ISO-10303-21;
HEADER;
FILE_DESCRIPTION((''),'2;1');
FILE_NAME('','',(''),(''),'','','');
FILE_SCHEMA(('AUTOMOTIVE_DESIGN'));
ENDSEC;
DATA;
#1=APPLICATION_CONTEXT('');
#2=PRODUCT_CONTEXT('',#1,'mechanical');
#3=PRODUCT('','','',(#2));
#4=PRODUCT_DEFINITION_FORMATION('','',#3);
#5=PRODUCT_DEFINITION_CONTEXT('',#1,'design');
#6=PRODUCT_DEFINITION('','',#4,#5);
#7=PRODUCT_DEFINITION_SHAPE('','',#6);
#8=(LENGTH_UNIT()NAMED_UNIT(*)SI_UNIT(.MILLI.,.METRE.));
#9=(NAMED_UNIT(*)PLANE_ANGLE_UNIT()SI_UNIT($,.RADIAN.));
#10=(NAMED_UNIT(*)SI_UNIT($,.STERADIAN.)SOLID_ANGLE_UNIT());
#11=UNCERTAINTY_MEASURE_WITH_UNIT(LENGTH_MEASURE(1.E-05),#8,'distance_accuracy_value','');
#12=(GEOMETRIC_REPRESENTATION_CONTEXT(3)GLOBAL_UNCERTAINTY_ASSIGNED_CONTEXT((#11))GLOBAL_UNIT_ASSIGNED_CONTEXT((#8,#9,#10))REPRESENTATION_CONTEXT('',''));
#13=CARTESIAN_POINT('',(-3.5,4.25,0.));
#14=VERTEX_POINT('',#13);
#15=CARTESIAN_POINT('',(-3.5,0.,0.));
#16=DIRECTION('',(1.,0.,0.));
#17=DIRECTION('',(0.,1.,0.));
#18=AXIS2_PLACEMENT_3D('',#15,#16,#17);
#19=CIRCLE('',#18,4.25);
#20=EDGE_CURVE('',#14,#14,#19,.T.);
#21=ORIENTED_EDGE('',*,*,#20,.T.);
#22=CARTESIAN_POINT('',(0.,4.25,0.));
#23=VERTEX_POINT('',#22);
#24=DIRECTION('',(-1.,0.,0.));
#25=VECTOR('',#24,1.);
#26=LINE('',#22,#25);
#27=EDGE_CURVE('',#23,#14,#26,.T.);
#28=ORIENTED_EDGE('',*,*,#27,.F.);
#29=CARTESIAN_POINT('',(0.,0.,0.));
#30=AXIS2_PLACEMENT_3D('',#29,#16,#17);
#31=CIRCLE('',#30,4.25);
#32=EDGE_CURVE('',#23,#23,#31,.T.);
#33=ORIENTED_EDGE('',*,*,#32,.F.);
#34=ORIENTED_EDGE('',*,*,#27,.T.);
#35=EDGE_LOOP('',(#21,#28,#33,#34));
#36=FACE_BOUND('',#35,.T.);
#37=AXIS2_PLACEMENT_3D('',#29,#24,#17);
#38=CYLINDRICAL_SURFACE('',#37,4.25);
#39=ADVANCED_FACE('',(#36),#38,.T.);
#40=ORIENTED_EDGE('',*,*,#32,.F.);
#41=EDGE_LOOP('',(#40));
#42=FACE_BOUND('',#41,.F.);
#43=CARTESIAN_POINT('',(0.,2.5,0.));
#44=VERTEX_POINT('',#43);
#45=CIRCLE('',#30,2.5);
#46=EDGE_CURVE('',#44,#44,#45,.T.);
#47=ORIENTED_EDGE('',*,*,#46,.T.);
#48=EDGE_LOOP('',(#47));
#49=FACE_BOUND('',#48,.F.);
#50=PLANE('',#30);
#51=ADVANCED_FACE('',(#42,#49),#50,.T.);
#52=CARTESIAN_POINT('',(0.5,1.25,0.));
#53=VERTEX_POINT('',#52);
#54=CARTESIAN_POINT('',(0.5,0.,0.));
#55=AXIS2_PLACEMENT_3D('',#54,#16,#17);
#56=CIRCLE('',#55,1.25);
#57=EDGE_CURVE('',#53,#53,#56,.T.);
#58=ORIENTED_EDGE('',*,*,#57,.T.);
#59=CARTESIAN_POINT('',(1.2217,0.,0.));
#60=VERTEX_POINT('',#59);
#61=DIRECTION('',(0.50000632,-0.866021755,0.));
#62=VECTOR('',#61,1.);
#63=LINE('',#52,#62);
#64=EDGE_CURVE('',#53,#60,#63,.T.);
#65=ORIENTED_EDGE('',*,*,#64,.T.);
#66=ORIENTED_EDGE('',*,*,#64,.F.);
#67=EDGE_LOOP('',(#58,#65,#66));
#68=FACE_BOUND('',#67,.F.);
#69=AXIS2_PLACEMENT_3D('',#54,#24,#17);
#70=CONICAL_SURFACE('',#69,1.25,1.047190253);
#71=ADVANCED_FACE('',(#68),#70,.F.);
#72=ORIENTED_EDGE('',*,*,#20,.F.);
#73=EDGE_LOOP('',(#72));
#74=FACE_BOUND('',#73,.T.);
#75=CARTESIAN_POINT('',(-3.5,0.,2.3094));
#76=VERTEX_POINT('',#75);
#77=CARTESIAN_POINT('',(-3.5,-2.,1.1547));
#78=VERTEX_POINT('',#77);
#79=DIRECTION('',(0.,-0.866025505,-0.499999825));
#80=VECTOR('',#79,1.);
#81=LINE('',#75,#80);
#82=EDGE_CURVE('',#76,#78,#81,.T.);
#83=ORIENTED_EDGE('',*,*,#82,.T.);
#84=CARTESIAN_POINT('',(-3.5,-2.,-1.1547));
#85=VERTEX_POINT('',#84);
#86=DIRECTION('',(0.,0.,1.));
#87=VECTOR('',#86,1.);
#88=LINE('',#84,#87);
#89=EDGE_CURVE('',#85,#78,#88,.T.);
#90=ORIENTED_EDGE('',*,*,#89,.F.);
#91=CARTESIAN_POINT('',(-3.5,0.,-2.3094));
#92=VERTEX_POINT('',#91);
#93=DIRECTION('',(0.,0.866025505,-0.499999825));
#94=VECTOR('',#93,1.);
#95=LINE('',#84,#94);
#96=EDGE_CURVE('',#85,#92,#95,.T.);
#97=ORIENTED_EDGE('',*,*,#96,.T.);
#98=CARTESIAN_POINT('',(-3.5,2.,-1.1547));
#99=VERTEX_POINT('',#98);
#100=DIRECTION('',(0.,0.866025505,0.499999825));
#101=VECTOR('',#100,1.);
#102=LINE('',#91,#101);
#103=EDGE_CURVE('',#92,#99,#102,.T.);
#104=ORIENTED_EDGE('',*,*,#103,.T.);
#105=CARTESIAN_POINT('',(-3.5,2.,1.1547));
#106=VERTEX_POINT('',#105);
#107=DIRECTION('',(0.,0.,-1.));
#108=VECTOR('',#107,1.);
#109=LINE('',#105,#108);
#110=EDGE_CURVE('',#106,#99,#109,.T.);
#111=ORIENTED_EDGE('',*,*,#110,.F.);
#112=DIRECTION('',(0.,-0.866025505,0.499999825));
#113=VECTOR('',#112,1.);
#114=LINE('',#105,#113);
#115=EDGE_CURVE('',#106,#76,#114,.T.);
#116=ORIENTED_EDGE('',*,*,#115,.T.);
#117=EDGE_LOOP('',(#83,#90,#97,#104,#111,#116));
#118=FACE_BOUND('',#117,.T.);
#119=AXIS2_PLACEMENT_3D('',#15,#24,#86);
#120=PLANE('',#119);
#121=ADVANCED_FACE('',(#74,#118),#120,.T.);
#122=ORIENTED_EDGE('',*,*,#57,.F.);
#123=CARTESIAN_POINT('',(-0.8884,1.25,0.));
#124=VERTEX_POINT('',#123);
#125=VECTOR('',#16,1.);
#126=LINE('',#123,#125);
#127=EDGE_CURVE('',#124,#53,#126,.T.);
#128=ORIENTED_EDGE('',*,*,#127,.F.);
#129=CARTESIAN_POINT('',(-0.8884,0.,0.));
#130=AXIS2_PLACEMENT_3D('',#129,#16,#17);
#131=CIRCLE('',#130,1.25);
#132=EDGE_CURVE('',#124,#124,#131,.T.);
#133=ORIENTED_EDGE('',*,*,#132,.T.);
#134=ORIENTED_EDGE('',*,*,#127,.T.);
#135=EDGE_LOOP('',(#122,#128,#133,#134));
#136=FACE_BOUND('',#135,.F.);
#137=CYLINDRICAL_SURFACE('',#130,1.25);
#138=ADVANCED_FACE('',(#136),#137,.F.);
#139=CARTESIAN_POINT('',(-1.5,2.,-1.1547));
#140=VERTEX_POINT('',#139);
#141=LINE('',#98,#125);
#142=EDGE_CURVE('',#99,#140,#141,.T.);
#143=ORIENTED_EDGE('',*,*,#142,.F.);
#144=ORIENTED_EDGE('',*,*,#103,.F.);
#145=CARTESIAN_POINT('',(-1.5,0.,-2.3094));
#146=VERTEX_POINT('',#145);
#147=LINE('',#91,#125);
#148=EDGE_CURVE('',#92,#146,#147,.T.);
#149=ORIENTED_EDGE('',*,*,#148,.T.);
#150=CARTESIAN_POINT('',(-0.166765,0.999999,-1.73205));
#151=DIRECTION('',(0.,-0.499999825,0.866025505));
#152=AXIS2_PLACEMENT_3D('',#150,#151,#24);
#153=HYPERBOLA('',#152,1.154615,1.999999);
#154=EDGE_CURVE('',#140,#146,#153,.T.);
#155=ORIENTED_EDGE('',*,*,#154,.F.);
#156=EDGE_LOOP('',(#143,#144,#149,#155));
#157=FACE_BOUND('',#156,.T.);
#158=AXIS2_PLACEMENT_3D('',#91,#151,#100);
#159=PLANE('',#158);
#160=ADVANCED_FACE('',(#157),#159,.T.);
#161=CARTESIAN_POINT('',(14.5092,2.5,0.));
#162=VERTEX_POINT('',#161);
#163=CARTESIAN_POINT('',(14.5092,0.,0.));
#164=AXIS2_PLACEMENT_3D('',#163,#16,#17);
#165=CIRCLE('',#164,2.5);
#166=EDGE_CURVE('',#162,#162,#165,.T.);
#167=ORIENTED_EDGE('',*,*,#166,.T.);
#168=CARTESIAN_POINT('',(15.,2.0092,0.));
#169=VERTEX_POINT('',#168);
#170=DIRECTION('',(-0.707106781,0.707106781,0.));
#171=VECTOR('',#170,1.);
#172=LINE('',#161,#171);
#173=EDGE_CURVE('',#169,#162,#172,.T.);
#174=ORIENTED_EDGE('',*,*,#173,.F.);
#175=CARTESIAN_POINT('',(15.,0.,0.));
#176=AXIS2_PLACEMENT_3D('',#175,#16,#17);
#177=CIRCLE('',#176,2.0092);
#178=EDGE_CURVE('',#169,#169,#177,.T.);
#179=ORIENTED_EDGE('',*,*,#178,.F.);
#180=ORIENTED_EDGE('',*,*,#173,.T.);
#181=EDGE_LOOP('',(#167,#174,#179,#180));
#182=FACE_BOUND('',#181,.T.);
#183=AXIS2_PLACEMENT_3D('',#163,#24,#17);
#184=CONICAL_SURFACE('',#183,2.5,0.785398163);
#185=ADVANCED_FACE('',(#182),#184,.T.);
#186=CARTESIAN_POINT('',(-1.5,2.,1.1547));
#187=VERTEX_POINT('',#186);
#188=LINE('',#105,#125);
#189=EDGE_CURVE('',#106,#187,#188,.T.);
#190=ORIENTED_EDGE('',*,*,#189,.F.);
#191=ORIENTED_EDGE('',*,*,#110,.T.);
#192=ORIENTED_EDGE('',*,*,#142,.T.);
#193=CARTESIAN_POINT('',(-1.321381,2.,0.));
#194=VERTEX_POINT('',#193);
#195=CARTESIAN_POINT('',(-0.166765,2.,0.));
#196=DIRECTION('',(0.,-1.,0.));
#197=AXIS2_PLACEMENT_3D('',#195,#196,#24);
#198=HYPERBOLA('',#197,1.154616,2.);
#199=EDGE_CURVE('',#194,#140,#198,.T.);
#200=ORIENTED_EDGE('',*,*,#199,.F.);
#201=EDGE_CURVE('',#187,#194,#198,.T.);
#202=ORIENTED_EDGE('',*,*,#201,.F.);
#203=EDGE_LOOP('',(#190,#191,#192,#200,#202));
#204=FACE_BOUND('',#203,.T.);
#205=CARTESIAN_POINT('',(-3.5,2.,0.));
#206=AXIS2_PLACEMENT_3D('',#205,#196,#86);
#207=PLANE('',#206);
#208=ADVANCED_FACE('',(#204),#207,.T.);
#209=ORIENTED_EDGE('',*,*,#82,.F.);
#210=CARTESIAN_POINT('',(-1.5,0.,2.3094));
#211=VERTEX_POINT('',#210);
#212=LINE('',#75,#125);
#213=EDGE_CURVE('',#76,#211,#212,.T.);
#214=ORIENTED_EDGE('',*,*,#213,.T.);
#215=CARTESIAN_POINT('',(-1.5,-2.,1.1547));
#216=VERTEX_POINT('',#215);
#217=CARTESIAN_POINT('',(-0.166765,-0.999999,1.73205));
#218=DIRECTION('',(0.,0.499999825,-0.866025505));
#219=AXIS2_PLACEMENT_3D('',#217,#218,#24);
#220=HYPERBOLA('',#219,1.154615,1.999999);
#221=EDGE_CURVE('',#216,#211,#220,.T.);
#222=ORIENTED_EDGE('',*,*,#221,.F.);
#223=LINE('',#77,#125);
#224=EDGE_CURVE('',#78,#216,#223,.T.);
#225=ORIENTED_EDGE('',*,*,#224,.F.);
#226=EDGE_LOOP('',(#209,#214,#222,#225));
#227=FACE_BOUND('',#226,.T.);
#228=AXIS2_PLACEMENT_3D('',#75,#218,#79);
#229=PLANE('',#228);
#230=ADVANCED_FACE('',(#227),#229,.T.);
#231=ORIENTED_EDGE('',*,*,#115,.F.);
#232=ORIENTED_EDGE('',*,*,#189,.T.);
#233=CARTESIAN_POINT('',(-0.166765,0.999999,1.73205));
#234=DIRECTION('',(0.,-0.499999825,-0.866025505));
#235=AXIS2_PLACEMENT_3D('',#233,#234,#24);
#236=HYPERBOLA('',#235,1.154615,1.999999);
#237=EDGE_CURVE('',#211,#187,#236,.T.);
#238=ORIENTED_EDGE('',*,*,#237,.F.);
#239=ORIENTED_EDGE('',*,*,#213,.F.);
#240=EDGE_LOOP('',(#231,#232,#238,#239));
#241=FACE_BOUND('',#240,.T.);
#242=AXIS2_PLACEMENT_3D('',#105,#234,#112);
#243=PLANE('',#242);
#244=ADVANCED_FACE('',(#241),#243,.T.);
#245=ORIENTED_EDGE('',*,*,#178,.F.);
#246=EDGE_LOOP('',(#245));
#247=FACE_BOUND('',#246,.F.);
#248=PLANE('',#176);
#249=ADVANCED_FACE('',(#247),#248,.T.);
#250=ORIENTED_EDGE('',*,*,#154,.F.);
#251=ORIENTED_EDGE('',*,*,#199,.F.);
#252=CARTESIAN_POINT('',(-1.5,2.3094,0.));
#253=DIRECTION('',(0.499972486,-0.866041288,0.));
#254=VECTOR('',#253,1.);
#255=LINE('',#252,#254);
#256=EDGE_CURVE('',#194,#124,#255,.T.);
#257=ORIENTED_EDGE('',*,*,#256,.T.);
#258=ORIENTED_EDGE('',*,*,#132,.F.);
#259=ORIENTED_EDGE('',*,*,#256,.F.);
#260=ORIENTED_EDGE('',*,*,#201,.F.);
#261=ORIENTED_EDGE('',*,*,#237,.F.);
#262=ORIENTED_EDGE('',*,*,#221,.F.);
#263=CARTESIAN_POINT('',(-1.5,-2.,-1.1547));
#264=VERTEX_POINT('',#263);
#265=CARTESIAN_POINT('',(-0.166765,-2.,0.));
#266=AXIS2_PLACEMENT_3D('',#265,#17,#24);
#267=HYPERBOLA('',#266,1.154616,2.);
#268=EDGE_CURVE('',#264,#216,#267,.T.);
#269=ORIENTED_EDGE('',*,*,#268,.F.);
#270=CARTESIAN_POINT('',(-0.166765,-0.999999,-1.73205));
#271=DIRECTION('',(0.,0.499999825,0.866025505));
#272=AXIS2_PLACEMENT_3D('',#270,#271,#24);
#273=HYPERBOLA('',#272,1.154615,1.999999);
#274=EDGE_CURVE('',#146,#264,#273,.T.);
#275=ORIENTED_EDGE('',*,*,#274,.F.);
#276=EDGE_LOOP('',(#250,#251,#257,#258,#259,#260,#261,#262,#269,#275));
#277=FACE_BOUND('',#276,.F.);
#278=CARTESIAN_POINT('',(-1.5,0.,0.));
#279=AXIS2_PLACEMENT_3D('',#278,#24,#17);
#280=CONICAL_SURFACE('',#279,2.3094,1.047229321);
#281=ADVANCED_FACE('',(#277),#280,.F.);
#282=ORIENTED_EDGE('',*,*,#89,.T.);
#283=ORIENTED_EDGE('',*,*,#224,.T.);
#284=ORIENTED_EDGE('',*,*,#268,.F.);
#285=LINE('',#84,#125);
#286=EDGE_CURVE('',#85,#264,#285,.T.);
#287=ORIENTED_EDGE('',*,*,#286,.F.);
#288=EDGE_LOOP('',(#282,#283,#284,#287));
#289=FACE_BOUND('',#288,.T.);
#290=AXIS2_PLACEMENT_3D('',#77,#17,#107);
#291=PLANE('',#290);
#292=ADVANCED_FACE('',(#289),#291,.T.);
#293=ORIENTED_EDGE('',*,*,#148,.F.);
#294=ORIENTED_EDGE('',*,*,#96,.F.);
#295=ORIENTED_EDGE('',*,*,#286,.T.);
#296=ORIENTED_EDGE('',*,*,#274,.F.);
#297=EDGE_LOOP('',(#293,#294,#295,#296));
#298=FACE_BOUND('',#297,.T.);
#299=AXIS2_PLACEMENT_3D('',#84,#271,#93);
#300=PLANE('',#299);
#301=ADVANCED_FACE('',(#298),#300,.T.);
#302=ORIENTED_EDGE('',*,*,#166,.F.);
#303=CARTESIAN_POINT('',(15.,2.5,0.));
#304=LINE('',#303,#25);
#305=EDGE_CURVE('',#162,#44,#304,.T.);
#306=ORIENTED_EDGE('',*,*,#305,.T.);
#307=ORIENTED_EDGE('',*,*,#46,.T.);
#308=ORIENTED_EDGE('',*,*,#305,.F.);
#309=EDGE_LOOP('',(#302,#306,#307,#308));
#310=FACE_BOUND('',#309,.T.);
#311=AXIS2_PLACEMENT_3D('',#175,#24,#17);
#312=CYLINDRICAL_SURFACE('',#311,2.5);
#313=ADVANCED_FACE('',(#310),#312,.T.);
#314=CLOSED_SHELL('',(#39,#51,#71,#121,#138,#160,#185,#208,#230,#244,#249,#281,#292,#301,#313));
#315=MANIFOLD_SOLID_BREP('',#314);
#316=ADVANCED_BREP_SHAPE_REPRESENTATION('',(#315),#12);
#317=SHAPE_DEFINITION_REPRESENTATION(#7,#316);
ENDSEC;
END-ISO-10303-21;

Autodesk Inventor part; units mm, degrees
ref_plane "YZ Plane" through (0, 0, 0) normal (1, 0, 0) x (0, 1, 0)
ref_plane "XZ Plane" through (0, 0, 0) normal (0, 1, 0) x (-1, 0, 0)
sketch "草圖1" plane through (0, 0, 0) normal (0, 0, 1) x (1, 0, 0)
  line L0 (1.2217, 0) -> (15, 0)
  line L1 (15, 0) -> (15, 2.5)
  line L2 (15, 2.5) -> (0, 2.5)
  line L3 (0, 2.5) -> (0, 4.25)
  line L4 (0, 4.25) -> (-3.5, 4.25)
  line L5 (-3.5, 4.25) -> (-3.5, 2.3094)
  line L6 (-3.5, 2.3094) -> (-1.5, 2.3094)
  line L7 (-1.5, 2.3094) -> (-0.8884, 1.25)
  line L8 (-7.2, 0) -> (18.7, 0) projected
  line L9 (0, -0.85) -> (0, 5.1) projected
  line L10 (-0.8884, 1.25) -> (0.5, 1.25)
  line L11 (0.5, 1.25) -> (1.2217, 0)
  line L12 (-3.5, 2.3094) -> (-3.5, 0) construction
  dimension "d0" = 3.5
  dimension "d1" = 2
  dimension "d2" = 60
  dimension "d3" = 5
  dimension "d4" = 4.6188
  dimension "d5" = 8.5
  dimension "d15" = 4
  dimension "d16" = 2.5
  dimension "d17" = 15
revolve "本體" add sketch "草圖1" angle 360 about axis through (1.2217, 0, 0) along (1, 0, 0) contours L11 L10 L9 L2 L1 L0 | L10 L7 L6 L5 L4 L3 L9
sketch "草圖2" plane through (-3.5, 0, 0) normal (-1, 0, 0) x (0, 0, 1)
  circle A0 centre (0, 0) radius 2.3094 projected
  line L0 (0, -5.95) -> (0, 5.95) projected
  line L1 (-5.95, 0) -> (5.95, 0) projected
  line L2 (2.3094, 0) -> (1.1547, -2)
  line L3 (1.1547, -2) -> (-1.1547, -2)
  line L4 (-1.1547, -2) -> (-2.3094, 0)
  line L5 (-2.3094, 0) -> (-1.1547, 2)
  line L6 (-1.1547, 2) -> (1.1547, 2)
  line L7 (1.1547, 2) -> (2.3094, 0)
extrude "塞槽" add sketch "草圖2" against normal up to next contours L7 A0 | A0 L2 | L6 L0 A0 | A0 L0 L3 | L0 L6 A0 | A0 L3 L0 | L4 A0 | A0 L5
thread "螺紋" size "M5x0.8" class "6g" standard "ISO Metric profile" length 12.4
chamfer "倒角1" distance 0.4908 distance2 0.4908 1 edges at (15, -2.5, 0) measured on face at (15, -0.7741, -0.6858)
ref_plane "Work Plane1" through (7.5, 0, 0) normal (0, 0.5, 0.8660254) x (1, 0, 0)
equation "\"d7\" = GEL"
equation "\"d9\" = -0.5 * SPD + 0.5 * GD"
equation "\"d12\" = GUL"
equation "\"d0\" = KOH"
equation "\"d1\" = INTI"
equation "\"d3\" = GD"
equation "\"d4\" = 1.1547 * SW"
equation "\"d5\" = KOD"
equation "\"d15\" = INFT"
equation "\"d16\" = SDT"
equation "\"d17\" = NLG"
equation "\"GD\" = NND"
equation "\"NLG\" = 15"
equation "\"GEL\" = 12.4"
equation "\"KOD\" = 8.5"
equation "\"KOH\" = 3.5"
equation "\"GUL\" = 0.61345 * PTC"
equation "\"SW\" = 4"
equation "\"INTI\" = 2"
equation "\"SPD\" = NND - 1.2269 * PTC"
equation "\"SDT\" = 2.5"
equation "\"INFT\" = 4"
equation "\"TOA\" = 30deg"
equation "\"GD1\" = THREADDIA - 1.2269 * PTC"
equation "\"THREADDIA\" = 5"
equation "\"BDM\" = NND"
equation "\"RR\" = 0.5"
equation "\"PTC\" = 0.8"
equation "\"NND\" = 5"
equation "\"SLG\" = 2.6"
equation "\"GAL\" = 0.61345 * PTC"
equation "\"E0\" = 1.155 * SW"
properties part number "CNS 4557 - M5 x 15" material "鋼、軟鋼"
